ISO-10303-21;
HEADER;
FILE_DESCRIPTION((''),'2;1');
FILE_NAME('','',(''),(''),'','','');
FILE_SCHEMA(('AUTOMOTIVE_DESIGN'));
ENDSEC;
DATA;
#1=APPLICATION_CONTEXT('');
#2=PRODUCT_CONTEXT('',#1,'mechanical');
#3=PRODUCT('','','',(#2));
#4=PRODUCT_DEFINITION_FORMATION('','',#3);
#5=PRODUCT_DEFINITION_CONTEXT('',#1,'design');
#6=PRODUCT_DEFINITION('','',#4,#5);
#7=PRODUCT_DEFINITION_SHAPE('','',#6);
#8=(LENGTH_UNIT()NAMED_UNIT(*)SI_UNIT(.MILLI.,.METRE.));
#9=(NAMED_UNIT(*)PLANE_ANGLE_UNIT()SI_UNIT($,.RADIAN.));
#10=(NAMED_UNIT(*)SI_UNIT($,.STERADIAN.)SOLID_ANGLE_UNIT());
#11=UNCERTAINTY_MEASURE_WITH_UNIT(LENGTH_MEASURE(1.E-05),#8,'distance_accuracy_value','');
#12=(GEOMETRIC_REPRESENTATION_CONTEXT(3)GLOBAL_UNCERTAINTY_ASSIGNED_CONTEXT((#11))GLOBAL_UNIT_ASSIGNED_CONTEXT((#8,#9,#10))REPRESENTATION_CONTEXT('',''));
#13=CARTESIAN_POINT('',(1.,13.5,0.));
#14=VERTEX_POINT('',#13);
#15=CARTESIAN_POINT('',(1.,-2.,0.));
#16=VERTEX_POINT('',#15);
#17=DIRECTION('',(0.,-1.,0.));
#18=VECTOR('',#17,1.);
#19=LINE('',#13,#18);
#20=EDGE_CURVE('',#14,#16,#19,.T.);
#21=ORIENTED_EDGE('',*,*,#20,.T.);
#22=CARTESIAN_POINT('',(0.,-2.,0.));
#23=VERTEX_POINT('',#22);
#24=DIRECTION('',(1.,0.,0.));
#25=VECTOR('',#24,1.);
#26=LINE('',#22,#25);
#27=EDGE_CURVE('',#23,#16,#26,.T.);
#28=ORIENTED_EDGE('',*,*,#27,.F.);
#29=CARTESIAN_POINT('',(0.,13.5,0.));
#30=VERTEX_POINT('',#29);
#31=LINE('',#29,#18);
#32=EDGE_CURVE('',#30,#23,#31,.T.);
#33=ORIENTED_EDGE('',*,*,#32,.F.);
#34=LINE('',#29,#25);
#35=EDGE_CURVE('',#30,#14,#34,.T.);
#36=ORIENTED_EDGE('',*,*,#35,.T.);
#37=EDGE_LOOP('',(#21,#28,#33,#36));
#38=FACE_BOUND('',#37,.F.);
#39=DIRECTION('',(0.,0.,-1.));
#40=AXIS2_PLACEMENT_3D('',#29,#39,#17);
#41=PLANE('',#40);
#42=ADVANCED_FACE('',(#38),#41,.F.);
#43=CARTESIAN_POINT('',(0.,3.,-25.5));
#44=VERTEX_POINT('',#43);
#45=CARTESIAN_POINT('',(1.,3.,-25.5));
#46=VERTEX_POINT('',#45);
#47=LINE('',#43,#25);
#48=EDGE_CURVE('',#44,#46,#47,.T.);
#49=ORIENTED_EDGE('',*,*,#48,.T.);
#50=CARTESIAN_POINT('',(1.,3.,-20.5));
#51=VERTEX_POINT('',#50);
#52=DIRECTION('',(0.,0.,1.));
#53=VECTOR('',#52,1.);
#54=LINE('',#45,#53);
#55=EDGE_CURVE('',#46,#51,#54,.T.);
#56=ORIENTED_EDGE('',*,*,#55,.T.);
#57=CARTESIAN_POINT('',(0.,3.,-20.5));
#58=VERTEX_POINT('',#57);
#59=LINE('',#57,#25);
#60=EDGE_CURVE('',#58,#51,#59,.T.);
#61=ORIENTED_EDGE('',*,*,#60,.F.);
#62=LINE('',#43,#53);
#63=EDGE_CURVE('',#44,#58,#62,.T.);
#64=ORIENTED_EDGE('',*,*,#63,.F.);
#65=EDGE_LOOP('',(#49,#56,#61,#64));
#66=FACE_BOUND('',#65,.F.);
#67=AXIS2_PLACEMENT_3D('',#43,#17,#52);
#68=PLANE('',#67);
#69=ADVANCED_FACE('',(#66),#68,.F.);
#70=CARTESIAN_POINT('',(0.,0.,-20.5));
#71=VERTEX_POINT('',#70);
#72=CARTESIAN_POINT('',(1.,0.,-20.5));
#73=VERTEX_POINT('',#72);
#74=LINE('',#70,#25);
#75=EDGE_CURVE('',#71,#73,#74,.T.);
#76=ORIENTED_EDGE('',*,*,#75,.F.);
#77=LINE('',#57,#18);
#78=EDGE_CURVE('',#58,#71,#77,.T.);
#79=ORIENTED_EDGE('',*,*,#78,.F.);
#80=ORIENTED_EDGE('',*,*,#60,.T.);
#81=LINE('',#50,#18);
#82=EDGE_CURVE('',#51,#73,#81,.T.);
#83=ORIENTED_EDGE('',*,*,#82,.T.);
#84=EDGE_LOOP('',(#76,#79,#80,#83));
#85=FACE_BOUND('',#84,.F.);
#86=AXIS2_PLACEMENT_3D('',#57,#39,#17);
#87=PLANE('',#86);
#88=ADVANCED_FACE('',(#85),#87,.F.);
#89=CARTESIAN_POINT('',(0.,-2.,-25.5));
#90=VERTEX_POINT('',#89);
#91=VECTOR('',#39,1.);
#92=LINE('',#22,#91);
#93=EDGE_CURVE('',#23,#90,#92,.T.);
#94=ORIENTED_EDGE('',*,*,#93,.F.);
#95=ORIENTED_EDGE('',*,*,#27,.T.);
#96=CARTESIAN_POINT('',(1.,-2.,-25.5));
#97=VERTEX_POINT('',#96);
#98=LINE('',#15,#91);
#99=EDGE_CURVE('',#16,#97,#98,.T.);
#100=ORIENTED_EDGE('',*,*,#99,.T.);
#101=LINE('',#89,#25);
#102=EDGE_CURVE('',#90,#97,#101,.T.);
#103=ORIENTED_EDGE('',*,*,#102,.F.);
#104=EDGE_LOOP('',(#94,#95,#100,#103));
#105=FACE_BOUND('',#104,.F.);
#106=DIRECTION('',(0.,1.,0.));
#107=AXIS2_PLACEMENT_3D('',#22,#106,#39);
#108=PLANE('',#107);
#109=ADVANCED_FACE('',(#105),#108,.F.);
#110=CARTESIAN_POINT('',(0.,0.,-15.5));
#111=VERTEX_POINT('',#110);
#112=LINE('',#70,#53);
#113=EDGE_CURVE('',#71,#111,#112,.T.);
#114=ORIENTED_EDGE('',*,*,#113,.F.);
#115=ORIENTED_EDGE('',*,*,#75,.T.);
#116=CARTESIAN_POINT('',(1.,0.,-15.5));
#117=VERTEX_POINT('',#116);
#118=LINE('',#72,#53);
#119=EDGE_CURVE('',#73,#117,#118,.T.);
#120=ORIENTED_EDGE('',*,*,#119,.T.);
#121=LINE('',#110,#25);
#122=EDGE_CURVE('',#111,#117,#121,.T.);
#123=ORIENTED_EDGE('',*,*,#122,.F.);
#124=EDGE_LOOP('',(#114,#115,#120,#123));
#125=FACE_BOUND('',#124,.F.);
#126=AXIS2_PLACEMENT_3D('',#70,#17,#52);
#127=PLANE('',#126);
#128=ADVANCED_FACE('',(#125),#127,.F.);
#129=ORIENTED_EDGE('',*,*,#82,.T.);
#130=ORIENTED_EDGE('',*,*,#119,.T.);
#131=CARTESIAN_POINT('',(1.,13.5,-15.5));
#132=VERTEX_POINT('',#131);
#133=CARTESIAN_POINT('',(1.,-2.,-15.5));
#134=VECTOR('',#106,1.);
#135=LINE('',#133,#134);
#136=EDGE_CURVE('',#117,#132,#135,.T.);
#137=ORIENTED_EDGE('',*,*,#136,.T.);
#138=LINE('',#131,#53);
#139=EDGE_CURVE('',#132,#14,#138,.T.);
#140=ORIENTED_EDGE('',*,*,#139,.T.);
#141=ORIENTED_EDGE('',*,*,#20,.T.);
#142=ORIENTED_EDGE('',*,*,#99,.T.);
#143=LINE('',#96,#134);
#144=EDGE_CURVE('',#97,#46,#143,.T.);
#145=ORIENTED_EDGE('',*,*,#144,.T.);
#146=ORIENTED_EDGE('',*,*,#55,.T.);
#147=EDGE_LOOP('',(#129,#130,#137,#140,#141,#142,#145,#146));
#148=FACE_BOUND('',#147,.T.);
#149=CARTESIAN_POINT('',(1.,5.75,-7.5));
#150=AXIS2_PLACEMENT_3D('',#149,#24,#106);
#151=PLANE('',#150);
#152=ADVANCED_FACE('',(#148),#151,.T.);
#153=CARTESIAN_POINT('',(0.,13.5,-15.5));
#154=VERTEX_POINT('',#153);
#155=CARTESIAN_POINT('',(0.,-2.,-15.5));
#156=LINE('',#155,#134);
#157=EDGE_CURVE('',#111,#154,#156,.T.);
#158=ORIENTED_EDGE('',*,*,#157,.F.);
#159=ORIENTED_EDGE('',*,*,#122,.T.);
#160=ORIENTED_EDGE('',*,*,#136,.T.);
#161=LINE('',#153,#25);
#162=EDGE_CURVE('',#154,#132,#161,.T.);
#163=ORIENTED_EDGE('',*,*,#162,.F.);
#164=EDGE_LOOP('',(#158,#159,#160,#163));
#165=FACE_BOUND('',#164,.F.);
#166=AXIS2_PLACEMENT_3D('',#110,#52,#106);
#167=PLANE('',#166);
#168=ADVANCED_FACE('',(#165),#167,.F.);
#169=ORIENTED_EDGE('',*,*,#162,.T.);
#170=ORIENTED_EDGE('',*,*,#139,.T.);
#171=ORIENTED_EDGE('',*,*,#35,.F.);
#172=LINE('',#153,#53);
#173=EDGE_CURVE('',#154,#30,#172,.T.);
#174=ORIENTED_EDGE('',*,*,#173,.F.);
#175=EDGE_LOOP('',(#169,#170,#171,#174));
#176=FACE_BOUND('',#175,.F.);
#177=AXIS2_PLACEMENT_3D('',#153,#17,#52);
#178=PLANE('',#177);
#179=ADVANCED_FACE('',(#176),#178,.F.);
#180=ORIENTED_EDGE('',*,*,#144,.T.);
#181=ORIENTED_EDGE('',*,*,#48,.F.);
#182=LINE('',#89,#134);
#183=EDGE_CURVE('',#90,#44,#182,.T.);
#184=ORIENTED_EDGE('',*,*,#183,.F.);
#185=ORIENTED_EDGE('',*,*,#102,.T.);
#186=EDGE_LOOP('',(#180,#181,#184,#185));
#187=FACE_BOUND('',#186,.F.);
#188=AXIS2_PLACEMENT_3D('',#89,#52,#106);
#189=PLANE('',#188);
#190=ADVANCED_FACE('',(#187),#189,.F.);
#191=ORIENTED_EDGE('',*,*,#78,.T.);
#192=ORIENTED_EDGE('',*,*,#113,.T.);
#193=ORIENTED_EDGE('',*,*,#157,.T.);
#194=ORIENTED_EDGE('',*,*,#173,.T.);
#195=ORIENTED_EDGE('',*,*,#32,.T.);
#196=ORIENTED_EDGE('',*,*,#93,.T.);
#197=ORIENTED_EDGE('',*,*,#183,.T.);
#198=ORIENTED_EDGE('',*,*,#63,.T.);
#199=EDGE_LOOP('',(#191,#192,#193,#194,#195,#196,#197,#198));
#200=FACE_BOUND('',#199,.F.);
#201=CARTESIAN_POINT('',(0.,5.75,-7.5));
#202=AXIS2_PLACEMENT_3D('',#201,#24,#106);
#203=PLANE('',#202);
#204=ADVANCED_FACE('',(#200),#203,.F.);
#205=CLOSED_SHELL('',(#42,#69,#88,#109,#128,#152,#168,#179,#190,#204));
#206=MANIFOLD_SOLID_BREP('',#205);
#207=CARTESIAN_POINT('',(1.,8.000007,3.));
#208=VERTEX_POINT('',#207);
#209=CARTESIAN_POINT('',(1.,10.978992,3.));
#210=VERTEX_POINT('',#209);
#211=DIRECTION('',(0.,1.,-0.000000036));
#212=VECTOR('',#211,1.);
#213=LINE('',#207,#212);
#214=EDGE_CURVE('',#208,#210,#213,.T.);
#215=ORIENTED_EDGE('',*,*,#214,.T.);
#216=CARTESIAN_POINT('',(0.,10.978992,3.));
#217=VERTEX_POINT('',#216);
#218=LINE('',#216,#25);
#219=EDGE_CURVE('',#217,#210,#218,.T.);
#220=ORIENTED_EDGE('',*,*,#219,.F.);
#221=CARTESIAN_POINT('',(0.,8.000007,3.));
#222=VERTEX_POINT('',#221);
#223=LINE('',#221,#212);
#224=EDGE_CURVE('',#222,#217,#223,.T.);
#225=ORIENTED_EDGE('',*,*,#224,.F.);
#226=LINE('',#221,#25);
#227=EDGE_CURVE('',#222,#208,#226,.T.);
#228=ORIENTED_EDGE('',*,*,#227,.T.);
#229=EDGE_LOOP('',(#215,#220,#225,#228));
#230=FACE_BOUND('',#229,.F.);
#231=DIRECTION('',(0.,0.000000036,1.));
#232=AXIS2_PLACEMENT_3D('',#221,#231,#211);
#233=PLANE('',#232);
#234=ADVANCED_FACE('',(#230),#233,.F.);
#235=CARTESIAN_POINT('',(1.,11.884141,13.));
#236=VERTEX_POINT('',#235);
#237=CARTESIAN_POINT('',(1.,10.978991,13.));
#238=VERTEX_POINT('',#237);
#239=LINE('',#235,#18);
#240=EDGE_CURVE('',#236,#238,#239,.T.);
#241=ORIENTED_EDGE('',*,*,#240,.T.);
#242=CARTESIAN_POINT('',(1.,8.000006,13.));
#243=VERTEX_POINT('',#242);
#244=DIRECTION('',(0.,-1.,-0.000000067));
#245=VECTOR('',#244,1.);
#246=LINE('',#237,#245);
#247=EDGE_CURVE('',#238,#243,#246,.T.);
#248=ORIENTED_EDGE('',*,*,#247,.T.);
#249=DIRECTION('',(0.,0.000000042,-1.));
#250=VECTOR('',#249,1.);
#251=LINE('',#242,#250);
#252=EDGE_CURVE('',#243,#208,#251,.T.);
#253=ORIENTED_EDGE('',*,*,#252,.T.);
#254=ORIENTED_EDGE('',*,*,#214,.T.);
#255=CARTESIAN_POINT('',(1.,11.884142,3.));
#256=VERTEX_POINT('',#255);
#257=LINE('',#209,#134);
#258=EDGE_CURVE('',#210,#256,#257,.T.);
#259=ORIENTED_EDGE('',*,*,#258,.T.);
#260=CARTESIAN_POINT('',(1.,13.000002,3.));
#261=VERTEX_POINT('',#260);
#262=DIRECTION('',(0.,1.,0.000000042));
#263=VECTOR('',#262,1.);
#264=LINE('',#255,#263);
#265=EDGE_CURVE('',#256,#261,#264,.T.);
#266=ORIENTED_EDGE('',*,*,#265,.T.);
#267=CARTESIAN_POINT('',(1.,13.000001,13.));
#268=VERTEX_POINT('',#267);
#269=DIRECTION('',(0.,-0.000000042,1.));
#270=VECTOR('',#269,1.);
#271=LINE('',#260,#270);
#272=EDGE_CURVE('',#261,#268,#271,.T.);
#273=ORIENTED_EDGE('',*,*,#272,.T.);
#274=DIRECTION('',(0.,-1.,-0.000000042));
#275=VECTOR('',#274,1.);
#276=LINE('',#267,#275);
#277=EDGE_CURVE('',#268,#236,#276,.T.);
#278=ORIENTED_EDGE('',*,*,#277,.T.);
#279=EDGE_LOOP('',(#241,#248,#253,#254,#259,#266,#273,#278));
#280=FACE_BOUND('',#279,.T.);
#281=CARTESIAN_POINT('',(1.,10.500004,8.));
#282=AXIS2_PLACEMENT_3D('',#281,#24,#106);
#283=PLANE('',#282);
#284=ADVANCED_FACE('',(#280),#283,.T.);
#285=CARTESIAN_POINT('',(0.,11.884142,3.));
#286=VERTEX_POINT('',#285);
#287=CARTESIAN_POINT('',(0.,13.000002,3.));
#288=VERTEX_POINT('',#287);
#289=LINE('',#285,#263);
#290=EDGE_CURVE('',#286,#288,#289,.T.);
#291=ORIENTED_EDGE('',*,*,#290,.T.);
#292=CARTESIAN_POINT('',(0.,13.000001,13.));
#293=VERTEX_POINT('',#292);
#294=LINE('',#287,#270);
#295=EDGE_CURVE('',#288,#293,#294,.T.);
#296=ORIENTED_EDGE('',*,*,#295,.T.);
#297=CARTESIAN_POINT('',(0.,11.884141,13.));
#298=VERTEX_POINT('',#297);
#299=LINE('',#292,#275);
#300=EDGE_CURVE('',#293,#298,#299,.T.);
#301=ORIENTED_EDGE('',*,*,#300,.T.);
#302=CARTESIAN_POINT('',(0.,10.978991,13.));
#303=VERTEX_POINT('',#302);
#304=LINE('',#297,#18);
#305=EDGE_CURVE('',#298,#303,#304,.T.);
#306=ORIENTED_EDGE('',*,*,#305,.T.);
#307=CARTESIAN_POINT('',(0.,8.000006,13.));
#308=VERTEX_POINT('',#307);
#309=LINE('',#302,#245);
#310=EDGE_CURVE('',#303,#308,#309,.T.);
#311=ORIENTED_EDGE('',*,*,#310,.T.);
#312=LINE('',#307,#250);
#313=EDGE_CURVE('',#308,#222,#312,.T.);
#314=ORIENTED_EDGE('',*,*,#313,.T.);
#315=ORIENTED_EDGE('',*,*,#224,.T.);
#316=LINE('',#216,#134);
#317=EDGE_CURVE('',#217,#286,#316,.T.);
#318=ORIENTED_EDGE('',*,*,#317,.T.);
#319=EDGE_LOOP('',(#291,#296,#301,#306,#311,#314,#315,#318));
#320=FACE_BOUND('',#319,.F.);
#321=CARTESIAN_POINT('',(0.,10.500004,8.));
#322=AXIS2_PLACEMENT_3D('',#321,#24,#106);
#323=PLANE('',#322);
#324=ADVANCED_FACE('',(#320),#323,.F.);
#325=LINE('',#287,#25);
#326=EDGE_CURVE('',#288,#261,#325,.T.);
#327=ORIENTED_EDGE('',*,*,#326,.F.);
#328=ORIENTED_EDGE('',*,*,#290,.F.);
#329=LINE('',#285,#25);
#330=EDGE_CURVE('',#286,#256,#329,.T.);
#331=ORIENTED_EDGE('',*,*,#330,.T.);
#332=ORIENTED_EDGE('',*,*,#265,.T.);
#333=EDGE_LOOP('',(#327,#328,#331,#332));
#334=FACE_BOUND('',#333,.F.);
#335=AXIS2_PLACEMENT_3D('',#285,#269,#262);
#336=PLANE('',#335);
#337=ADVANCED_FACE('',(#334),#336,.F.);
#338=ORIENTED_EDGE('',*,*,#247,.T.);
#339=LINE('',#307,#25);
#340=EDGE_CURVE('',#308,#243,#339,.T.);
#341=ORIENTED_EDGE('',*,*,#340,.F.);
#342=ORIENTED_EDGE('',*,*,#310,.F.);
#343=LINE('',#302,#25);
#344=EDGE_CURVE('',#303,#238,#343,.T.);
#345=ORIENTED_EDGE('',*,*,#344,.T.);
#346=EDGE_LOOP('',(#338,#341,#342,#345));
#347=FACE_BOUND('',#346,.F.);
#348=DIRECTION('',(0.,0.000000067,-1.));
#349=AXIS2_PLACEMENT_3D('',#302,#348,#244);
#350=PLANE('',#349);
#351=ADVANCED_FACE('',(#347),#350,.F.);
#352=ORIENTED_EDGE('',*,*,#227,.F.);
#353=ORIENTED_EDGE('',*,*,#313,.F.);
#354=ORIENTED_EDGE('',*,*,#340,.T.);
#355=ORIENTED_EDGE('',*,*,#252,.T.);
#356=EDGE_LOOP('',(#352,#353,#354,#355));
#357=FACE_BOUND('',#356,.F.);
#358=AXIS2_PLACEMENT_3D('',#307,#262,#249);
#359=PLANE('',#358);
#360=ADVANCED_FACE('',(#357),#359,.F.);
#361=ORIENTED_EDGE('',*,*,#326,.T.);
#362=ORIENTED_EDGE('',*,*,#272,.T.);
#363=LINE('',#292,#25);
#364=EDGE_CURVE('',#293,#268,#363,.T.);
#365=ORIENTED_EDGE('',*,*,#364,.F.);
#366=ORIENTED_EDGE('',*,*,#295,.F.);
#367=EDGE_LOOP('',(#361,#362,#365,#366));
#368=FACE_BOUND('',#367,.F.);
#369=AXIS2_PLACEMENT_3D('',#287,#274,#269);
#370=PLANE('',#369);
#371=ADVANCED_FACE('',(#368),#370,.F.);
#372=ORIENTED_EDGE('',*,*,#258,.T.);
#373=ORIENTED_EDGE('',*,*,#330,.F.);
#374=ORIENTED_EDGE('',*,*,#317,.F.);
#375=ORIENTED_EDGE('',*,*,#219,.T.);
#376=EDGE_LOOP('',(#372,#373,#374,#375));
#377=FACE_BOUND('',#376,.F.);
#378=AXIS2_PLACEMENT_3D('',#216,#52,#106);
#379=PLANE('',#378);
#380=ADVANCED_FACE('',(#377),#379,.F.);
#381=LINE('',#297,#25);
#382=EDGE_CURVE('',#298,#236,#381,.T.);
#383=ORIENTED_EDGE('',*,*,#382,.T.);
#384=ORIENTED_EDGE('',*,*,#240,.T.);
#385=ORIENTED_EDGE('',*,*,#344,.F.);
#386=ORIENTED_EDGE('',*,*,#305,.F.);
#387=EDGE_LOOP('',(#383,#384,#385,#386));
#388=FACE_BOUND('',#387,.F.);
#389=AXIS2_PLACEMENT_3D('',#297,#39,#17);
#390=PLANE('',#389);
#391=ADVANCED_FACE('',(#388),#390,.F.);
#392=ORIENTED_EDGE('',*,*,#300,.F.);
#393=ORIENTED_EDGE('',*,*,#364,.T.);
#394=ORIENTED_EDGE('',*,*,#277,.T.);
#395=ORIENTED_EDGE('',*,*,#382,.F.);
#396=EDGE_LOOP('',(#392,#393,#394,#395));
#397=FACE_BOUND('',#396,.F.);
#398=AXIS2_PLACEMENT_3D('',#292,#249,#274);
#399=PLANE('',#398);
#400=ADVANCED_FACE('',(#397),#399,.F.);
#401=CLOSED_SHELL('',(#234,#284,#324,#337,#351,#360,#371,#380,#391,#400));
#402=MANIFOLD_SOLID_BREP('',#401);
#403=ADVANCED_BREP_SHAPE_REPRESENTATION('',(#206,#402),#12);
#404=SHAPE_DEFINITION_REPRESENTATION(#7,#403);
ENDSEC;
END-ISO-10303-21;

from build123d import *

# Parameters (mm, degrees)
F0_W     = 0.25
F0_H     = 15
F1_DEPTH = 1


# Not quite as in the source:
# - a feature names something its author has since deleted; it is built from what else it names


with BuildPart() as f1:
    # F0 (on Right) → F1 (new body)
    with BuildSketch(Plane.YZ):
        Polygon((11.5, 0), (0, 0), (-1.75, 0), (-1.75, -15), (0, -15), (4.35, -15), (7.15, -15), (11.5, -15), (13.25, -15), (13.25, 0), align=None)
        with Locations((-1.875, -7.5)):
            Rectangle(F0_W, F0_H)
        with Locations((13.375, -7.5)):
            Rectangle(F0_W, F0_H)
        Polygon((0, -15), (-1.75, -15), (-2, -15), (-2, -15.5), (0, -15.5), (13.5, -15.5), (13.5, -15), (13.25, -15), (11.5, -15), (7.15, -15), (4.35, -15), align=None)
        Polygon((0, -15.5), (-2, -15.5), (-2, -25.5), (3, -25.5), (3, -20.5), (0, -20.5), align=None)
    extrude(amount=F1_DEPTH)


with BuildPart() as f1b:
    # F0 (on Right) → F1, piece 2 (new body)
    with BuildSketch(Plane.YZ):
        Polygon((10.9789912227, 13.000000208), (8.0000062163, 13.0000000082), (8.0000066322, 2.9999998385), (10.9789916386, 2.9999997318), (11.3841416386, 2.9999997318), (11.8841416386, 2.9999997318), (13.0000016386, 2.9999997782), (13.0000012227, 13.0000002544), (11.8841412227, 13.000000208), (11.3841412227, 13.000000208), align=None)
    extrude(amount=F1_DEPTH)


solid = Compound([f1.part, f1b.part])
